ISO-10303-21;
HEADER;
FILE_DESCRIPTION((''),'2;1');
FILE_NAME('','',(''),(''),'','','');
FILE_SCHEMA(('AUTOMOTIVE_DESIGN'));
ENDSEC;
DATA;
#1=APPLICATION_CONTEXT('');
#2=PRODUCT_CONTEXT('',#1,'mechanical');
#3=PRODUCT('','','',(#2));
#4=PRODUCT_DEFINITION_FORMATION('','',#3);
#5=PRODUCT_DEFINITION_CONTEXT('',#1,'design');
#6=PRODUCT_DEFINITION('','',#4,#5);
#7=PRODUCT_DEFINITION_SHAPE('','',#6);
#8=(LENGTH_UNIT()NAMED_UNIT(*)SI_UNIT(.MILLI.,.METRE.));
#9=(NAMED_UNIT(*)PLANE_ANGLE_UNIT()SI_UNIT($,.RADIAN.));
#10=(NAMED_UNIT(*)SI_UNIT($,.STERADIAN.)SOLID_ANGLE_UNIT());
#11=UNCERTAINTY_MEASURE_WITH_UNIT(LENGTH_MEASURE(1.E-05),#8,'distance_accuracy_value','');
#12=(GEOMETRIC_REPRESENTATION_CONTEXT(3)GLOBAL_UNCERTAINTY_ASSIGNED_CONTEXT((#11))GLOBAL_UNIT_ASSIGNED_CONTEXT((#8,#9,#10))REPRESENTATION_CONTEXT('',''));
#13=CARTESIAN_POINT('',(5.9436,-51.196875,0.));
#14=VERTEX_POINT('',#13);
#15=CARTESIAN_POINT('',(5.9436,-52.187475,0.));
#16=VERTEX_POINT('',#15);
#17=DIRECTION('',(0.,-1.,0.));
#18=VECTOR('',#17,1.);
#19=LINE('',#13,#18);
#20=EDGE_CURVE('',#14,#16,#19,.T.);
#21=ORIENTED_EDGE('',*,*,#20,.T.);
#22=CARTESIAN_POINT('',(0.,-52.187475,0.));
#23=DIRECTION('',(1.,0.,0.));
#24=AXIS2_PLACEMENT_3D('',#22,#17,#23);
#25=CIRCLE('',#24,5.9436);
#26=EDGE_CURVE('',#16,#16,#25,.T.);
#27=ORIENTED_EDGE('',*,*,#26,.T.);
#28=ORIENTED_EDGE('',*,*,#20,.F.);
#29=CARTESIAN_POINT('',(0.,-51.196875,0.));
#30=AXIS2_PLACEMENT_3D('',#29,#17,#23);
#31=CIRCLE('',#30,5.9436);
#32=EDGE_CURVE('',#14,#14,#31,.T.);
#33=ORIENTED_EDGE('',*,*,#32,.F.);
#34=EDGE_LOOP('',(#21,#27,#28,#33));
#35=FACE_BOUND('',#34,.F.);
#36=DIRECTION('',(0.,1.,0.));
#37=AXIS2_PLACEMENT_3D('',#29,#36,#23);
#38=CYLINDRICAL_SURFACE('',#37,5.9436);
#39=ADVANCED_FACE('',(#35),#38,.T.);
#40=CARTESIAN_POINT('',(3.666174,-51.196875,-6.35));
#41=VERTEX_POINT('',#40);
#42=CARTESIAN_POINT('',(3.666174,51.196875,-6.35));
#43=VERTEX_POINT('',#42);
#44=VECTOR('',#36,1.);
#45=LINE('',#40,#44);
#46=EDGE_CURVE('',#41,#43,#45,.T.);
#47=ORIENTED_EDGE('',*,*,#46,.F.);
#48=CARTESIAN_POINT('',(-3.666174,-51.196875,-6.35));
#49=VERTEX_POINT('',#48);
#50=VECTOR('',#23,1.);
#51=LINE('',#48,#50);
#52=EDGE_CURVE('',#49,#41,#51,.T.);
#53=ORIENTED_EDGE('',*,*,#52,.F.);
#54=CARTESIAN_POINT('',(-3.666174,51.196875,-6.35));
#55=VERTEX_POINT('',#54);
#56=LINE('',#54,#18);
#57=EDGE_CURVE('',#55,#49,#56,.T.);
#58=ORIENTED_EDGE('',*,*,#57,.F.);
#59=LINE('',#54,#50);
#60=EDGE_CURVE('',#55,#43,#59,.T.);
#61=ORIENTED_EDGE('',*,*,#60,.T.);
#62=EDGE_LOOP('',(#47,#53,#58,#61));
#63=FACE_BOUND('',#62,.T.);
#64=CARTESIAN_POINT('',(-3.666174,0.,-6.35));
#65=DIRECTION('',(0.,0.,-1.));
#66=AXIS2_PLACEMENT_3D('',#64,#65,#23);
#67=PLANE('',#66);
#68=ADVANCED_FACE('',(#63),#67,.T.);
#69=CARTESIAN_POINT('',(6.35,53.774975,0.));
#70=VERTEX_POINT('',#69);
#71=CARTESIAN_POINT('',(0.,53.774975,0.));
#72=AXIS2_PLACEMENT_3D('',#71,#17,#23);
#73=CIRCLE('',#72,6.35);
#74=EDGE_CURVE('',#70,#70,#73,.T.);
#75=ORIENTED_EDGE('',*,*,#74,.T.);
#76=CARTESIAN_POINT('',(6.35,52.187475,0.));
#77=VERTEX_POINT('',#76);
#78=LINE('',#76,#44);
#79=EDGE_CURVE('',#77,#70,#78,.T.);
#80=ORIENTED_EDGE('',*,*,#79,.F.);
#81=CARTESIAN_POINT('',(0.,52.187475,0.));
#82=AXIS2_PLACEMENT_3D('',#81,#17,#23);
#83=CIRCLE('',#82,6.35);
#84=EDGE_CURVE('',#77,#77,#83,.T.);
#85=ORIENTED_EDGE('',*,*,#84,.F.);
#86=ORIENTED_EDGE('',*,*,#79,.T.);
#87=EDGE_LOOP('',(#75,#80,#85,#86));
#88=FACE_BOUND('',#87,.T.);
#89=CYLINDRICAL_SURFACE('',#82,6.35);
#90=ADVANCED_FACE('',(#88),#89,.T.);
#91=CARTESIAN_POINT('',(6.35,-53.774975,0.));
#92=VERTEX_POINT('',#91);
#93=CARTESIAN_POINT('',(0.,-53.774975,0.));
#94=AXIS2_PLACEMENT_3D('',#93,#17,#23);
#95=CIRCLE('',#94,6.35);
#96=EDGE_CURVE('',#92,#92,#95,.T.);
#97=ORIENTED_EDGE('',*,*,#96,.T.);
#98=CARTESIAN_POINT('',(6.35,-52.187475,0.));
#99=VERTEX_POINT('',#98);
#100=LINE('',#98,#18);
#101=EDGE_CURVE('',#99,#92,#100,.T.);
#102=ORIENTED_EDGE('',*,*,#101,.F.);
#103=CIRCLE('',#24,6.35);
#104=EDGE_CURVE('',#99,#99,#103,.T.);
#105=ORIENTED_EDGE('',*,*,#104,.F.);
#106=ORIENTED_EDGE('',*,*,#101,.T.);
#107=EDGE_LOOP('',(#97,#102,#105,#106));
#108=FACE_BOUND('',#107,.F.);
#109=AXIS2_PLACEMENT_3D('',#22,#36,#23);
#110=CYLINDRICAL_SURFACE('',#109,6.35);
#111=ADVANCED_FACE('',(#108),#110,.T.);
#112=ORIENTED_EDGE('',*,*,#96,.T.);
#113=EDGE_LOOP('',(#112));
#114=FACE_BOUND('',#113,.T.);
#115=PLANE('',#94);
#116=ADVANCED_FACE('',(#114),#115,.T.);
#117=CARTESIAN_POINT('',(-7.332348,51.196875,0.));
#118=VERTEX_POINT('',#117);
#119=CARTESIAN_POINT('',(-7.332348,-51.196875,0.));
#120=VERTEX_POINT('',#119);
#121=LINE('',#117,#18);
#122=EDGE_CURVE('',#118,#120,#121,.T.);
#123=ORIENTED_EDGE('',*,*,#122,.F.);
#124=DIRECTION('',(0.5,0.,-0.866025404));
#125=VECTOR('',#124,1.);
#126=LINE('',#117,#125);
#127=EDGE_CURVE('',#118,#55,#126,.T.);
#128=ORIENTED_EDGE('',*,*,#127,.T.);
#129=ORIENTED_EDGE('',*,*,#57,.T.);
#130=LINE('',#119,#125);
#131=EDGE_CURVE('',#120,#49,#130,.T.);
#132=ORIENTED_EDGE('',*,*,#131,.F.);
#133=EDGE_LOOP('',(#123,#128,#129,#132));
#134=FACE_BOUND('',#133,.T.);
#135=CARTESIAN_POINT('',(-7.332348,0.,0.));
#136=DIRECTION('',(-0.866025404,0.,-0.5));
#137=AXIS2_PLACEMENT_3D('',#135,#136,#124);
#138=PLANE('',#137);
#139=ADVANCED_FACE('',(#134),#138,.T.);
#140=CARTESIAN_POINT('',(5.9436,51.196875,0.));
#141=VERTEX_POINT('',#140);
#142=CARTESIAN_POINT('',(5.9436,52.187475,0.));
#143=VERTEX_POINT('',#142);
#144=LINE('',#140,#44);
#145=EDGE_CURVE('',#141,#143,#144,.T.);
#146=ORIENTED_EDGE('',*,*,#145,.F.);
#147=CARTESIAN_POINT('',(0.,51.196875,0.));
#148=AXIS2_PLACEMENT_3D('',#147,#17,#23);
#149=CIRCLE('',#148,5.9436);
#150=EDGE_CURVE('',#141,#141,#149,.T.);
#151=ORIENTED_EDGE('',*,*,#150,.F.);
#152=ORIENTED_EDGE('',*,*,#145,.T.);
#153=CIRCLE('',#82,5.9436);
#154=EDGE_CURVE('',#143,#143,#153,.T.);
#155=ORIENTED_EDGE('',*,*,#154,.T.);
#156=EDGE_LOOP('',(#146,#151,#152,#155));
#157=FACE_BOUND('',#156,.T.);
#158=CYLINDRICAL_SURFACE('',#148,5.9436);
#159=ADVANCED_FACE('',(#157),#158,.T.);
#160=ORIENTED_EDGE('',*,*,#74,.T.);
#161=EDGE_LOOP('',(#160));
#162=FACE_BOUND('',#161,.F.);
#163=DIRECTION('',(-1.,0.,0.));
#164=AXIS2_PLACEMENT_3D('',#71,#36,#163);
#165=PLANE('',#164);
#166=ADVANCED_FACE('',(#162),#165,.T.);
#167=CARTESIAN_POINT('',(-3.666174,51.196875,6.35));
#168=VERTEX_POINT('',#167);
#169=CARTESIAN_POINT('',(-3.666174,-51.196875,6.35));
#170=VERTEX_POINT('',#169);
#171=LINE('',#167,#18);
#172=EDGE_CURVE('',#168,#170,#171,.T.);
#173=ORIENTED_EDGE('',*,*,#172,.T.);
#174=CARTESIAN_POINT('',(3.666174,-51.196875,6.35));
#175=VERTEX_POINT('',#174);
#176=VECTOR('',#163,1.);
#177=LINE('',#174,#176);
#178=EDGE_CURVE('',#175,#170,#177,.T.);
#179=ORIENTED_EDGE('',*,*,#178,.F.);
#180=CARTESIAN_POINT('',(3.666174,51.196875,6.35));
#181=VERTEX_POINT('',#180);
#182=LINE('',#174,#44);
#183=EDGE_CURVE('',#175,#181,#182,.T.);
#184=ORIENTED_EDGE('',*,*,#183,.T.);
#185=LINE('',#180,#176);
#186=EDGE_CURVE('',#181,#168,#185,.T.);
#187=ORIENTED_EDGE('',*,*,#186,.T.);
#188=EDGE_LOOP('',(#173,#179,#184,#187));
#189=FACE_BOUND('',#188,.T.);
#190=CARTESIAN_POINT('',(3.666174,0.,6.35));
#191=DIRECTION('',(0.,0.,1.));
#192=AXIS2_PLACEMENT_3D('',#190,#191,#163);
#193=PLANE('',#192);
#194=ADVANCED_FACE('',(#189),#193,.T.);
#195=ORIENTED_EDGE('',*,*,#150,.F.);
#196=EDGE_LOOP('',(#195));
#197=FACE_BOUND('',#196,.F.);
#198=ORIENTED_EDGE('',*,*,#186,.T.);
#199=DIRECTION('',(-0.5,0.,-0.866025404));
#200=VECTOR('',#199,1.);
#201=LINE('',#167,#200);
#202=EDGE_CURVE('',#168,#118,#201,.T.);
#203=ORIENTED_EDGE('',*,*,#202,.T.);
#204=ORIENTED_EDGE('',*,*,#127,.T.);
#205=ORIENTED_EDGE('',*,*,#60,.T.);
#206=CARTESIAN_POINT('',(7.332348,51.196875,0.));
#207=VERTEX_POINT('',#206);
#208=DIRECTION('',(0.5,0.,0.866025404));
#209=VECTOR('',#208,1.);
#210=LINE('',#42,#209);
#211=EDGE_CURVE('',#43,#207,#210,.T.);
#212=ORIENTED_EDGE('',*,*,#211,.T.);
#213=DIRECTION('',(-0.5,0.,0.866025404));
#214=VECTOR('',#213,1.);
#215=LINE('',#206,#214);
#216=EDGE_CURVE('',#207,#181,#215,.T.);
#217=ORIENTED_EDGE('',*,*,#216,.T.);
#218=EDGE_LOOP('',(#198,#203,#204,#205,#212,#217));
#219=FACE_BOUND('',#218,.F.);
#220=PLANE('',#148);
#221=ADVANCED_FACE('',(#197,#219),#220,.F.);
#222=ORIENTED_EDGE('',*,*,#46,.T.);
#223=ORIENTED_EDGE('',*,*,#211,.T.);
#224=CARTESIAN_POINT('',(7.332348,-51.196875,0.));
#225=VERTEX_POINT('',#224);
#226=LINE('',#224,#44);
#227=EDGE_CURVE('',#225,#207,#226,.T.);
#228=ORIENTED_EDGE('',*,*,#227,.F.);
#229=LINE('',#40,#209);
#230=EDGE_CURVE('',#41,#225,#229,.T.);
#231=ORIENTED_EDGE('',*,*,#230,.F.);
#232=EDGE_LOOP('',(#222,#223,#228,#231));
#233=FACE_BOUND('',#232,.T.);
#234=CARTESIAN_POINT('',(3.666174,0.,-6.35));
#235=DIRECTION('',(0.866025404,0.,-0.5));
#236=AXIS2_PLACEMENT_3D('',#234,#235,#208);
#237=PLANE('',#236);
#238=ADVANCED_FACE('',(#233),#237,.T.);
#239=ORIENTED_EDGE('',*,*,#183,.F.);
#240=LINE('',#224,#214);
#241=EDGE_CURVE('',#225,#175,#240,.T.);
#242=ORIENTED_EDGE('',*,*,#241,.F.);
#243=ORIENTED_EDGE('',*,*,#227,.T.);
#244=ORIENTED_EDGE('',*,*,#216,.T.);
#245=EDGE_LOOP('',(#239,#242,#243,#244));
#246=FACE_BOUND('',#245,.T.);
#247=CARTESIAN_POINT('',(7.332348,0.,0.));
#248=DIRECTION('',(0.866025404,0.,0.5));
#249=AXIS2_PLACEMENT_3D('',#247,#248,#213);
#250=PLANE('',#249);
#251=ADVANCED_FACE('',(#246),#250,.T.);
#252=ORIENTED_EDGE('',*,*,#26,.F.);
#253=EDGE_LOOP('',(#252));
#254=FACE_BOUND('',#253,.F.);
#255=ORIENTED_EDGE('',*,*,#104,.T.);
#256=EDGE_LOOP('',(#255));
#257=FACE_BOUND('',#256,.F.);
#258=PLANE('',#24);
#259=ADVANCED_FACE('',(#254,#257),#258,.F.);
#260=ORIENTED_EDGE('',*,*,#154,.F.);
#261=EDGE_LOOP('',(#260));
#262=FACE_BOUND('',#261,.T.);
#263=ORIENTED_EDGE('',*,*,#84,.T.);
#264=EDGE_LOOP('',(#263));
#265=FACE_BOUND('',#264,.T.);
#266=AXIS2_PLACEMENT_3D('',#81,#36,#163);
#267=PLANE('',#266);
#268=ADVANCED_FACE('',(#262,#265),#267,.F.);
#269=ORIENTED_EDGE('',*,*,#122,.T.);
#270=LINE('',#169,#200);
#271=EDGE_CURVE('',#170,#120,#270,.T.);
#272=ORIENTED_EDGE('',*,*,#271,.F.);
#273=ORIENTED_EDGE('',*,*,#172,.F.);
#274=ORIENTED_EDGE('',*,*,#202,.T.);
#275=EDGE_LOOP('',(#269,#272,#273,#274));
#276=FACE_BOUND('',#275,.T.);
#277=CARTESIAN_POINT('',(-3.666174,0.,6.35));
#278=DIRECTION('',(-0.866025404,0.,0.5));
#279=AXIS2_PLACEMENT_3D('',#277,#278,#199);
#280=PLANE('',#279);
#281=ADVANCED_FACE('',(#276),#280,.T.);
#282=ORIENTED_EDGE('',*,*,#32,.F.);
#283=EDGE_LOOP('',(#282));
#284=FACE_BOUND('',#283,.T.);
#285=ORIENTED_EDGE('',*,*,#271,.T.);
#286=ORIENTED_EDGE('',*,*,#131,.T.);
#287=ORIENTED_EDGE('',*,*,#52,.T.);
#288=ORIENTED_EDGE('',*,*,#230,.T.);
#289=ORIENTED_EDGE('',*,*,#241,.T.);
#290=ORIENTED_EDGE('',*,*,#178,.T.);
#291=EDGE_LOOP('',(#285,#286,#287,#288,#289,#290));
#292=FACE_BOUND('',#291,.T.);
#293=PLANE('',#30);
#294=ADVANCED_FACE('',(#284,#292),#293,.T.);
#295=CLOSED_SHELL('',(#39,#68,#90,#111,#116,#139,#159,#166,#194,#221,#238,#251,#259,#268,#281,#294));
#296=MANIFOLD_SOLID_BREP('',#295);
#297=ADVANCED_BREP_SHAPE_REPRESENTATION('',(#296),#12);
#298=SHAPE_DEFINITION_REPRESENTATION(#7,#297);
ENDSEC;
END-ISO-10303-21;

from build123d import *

# Parameters (mm, degrees)
F1_DEPTH      = 51.196875
F1_DEPTH_BACK = 51.196875
F2_R          = 5.9436
F3_DEPTH      = 0.9906
F4_R          = 6.35
F5_DEPTH      = 1.5875


# Not quite as in the source:
# - a pattern or mirror of a feature is missing from the dataset's text; its kind, count and spacing are read off the source's solid


with BuildPart() as f1:
    # F0 (on Front) → F1 (new body, two sides)
    with BuildSketch(Plane.XZ) as f1_sk:
        Polygon((3.6661742094, 6.35), (-3.6661742094, 6.35), (-7.3323484187, 0), (-3.6661742094, -6.35), (3.6661742094, -6.35), (7.3323484187, 0), align=None)
    extrude(amount=F1_DEPTH)
    extrude(f1_sk.sketch, amount=-F1_DEPTH_BACK)

    # F2 (on face) → F3 (join)
    with BuildSketch(Plane.XZ.offset(51.196875)):
        Circle(F2_R)
    f3 = extrude(amount=F3_DEPTH)

    # F3_copies: F3 across plane
    add(f3.mirror(Plane.ZX))

    # F4 (on face) → F5 (join)
    with BuildSketch(Plane.XZ.offset(52.187475)):
        Circle(F4_R)
    f5 = extrude(amount=F5_DEPTH)

    # F5_copies: F5 across plane
    add(f5.mirror(Plane.ZX))


solid = f1.part
